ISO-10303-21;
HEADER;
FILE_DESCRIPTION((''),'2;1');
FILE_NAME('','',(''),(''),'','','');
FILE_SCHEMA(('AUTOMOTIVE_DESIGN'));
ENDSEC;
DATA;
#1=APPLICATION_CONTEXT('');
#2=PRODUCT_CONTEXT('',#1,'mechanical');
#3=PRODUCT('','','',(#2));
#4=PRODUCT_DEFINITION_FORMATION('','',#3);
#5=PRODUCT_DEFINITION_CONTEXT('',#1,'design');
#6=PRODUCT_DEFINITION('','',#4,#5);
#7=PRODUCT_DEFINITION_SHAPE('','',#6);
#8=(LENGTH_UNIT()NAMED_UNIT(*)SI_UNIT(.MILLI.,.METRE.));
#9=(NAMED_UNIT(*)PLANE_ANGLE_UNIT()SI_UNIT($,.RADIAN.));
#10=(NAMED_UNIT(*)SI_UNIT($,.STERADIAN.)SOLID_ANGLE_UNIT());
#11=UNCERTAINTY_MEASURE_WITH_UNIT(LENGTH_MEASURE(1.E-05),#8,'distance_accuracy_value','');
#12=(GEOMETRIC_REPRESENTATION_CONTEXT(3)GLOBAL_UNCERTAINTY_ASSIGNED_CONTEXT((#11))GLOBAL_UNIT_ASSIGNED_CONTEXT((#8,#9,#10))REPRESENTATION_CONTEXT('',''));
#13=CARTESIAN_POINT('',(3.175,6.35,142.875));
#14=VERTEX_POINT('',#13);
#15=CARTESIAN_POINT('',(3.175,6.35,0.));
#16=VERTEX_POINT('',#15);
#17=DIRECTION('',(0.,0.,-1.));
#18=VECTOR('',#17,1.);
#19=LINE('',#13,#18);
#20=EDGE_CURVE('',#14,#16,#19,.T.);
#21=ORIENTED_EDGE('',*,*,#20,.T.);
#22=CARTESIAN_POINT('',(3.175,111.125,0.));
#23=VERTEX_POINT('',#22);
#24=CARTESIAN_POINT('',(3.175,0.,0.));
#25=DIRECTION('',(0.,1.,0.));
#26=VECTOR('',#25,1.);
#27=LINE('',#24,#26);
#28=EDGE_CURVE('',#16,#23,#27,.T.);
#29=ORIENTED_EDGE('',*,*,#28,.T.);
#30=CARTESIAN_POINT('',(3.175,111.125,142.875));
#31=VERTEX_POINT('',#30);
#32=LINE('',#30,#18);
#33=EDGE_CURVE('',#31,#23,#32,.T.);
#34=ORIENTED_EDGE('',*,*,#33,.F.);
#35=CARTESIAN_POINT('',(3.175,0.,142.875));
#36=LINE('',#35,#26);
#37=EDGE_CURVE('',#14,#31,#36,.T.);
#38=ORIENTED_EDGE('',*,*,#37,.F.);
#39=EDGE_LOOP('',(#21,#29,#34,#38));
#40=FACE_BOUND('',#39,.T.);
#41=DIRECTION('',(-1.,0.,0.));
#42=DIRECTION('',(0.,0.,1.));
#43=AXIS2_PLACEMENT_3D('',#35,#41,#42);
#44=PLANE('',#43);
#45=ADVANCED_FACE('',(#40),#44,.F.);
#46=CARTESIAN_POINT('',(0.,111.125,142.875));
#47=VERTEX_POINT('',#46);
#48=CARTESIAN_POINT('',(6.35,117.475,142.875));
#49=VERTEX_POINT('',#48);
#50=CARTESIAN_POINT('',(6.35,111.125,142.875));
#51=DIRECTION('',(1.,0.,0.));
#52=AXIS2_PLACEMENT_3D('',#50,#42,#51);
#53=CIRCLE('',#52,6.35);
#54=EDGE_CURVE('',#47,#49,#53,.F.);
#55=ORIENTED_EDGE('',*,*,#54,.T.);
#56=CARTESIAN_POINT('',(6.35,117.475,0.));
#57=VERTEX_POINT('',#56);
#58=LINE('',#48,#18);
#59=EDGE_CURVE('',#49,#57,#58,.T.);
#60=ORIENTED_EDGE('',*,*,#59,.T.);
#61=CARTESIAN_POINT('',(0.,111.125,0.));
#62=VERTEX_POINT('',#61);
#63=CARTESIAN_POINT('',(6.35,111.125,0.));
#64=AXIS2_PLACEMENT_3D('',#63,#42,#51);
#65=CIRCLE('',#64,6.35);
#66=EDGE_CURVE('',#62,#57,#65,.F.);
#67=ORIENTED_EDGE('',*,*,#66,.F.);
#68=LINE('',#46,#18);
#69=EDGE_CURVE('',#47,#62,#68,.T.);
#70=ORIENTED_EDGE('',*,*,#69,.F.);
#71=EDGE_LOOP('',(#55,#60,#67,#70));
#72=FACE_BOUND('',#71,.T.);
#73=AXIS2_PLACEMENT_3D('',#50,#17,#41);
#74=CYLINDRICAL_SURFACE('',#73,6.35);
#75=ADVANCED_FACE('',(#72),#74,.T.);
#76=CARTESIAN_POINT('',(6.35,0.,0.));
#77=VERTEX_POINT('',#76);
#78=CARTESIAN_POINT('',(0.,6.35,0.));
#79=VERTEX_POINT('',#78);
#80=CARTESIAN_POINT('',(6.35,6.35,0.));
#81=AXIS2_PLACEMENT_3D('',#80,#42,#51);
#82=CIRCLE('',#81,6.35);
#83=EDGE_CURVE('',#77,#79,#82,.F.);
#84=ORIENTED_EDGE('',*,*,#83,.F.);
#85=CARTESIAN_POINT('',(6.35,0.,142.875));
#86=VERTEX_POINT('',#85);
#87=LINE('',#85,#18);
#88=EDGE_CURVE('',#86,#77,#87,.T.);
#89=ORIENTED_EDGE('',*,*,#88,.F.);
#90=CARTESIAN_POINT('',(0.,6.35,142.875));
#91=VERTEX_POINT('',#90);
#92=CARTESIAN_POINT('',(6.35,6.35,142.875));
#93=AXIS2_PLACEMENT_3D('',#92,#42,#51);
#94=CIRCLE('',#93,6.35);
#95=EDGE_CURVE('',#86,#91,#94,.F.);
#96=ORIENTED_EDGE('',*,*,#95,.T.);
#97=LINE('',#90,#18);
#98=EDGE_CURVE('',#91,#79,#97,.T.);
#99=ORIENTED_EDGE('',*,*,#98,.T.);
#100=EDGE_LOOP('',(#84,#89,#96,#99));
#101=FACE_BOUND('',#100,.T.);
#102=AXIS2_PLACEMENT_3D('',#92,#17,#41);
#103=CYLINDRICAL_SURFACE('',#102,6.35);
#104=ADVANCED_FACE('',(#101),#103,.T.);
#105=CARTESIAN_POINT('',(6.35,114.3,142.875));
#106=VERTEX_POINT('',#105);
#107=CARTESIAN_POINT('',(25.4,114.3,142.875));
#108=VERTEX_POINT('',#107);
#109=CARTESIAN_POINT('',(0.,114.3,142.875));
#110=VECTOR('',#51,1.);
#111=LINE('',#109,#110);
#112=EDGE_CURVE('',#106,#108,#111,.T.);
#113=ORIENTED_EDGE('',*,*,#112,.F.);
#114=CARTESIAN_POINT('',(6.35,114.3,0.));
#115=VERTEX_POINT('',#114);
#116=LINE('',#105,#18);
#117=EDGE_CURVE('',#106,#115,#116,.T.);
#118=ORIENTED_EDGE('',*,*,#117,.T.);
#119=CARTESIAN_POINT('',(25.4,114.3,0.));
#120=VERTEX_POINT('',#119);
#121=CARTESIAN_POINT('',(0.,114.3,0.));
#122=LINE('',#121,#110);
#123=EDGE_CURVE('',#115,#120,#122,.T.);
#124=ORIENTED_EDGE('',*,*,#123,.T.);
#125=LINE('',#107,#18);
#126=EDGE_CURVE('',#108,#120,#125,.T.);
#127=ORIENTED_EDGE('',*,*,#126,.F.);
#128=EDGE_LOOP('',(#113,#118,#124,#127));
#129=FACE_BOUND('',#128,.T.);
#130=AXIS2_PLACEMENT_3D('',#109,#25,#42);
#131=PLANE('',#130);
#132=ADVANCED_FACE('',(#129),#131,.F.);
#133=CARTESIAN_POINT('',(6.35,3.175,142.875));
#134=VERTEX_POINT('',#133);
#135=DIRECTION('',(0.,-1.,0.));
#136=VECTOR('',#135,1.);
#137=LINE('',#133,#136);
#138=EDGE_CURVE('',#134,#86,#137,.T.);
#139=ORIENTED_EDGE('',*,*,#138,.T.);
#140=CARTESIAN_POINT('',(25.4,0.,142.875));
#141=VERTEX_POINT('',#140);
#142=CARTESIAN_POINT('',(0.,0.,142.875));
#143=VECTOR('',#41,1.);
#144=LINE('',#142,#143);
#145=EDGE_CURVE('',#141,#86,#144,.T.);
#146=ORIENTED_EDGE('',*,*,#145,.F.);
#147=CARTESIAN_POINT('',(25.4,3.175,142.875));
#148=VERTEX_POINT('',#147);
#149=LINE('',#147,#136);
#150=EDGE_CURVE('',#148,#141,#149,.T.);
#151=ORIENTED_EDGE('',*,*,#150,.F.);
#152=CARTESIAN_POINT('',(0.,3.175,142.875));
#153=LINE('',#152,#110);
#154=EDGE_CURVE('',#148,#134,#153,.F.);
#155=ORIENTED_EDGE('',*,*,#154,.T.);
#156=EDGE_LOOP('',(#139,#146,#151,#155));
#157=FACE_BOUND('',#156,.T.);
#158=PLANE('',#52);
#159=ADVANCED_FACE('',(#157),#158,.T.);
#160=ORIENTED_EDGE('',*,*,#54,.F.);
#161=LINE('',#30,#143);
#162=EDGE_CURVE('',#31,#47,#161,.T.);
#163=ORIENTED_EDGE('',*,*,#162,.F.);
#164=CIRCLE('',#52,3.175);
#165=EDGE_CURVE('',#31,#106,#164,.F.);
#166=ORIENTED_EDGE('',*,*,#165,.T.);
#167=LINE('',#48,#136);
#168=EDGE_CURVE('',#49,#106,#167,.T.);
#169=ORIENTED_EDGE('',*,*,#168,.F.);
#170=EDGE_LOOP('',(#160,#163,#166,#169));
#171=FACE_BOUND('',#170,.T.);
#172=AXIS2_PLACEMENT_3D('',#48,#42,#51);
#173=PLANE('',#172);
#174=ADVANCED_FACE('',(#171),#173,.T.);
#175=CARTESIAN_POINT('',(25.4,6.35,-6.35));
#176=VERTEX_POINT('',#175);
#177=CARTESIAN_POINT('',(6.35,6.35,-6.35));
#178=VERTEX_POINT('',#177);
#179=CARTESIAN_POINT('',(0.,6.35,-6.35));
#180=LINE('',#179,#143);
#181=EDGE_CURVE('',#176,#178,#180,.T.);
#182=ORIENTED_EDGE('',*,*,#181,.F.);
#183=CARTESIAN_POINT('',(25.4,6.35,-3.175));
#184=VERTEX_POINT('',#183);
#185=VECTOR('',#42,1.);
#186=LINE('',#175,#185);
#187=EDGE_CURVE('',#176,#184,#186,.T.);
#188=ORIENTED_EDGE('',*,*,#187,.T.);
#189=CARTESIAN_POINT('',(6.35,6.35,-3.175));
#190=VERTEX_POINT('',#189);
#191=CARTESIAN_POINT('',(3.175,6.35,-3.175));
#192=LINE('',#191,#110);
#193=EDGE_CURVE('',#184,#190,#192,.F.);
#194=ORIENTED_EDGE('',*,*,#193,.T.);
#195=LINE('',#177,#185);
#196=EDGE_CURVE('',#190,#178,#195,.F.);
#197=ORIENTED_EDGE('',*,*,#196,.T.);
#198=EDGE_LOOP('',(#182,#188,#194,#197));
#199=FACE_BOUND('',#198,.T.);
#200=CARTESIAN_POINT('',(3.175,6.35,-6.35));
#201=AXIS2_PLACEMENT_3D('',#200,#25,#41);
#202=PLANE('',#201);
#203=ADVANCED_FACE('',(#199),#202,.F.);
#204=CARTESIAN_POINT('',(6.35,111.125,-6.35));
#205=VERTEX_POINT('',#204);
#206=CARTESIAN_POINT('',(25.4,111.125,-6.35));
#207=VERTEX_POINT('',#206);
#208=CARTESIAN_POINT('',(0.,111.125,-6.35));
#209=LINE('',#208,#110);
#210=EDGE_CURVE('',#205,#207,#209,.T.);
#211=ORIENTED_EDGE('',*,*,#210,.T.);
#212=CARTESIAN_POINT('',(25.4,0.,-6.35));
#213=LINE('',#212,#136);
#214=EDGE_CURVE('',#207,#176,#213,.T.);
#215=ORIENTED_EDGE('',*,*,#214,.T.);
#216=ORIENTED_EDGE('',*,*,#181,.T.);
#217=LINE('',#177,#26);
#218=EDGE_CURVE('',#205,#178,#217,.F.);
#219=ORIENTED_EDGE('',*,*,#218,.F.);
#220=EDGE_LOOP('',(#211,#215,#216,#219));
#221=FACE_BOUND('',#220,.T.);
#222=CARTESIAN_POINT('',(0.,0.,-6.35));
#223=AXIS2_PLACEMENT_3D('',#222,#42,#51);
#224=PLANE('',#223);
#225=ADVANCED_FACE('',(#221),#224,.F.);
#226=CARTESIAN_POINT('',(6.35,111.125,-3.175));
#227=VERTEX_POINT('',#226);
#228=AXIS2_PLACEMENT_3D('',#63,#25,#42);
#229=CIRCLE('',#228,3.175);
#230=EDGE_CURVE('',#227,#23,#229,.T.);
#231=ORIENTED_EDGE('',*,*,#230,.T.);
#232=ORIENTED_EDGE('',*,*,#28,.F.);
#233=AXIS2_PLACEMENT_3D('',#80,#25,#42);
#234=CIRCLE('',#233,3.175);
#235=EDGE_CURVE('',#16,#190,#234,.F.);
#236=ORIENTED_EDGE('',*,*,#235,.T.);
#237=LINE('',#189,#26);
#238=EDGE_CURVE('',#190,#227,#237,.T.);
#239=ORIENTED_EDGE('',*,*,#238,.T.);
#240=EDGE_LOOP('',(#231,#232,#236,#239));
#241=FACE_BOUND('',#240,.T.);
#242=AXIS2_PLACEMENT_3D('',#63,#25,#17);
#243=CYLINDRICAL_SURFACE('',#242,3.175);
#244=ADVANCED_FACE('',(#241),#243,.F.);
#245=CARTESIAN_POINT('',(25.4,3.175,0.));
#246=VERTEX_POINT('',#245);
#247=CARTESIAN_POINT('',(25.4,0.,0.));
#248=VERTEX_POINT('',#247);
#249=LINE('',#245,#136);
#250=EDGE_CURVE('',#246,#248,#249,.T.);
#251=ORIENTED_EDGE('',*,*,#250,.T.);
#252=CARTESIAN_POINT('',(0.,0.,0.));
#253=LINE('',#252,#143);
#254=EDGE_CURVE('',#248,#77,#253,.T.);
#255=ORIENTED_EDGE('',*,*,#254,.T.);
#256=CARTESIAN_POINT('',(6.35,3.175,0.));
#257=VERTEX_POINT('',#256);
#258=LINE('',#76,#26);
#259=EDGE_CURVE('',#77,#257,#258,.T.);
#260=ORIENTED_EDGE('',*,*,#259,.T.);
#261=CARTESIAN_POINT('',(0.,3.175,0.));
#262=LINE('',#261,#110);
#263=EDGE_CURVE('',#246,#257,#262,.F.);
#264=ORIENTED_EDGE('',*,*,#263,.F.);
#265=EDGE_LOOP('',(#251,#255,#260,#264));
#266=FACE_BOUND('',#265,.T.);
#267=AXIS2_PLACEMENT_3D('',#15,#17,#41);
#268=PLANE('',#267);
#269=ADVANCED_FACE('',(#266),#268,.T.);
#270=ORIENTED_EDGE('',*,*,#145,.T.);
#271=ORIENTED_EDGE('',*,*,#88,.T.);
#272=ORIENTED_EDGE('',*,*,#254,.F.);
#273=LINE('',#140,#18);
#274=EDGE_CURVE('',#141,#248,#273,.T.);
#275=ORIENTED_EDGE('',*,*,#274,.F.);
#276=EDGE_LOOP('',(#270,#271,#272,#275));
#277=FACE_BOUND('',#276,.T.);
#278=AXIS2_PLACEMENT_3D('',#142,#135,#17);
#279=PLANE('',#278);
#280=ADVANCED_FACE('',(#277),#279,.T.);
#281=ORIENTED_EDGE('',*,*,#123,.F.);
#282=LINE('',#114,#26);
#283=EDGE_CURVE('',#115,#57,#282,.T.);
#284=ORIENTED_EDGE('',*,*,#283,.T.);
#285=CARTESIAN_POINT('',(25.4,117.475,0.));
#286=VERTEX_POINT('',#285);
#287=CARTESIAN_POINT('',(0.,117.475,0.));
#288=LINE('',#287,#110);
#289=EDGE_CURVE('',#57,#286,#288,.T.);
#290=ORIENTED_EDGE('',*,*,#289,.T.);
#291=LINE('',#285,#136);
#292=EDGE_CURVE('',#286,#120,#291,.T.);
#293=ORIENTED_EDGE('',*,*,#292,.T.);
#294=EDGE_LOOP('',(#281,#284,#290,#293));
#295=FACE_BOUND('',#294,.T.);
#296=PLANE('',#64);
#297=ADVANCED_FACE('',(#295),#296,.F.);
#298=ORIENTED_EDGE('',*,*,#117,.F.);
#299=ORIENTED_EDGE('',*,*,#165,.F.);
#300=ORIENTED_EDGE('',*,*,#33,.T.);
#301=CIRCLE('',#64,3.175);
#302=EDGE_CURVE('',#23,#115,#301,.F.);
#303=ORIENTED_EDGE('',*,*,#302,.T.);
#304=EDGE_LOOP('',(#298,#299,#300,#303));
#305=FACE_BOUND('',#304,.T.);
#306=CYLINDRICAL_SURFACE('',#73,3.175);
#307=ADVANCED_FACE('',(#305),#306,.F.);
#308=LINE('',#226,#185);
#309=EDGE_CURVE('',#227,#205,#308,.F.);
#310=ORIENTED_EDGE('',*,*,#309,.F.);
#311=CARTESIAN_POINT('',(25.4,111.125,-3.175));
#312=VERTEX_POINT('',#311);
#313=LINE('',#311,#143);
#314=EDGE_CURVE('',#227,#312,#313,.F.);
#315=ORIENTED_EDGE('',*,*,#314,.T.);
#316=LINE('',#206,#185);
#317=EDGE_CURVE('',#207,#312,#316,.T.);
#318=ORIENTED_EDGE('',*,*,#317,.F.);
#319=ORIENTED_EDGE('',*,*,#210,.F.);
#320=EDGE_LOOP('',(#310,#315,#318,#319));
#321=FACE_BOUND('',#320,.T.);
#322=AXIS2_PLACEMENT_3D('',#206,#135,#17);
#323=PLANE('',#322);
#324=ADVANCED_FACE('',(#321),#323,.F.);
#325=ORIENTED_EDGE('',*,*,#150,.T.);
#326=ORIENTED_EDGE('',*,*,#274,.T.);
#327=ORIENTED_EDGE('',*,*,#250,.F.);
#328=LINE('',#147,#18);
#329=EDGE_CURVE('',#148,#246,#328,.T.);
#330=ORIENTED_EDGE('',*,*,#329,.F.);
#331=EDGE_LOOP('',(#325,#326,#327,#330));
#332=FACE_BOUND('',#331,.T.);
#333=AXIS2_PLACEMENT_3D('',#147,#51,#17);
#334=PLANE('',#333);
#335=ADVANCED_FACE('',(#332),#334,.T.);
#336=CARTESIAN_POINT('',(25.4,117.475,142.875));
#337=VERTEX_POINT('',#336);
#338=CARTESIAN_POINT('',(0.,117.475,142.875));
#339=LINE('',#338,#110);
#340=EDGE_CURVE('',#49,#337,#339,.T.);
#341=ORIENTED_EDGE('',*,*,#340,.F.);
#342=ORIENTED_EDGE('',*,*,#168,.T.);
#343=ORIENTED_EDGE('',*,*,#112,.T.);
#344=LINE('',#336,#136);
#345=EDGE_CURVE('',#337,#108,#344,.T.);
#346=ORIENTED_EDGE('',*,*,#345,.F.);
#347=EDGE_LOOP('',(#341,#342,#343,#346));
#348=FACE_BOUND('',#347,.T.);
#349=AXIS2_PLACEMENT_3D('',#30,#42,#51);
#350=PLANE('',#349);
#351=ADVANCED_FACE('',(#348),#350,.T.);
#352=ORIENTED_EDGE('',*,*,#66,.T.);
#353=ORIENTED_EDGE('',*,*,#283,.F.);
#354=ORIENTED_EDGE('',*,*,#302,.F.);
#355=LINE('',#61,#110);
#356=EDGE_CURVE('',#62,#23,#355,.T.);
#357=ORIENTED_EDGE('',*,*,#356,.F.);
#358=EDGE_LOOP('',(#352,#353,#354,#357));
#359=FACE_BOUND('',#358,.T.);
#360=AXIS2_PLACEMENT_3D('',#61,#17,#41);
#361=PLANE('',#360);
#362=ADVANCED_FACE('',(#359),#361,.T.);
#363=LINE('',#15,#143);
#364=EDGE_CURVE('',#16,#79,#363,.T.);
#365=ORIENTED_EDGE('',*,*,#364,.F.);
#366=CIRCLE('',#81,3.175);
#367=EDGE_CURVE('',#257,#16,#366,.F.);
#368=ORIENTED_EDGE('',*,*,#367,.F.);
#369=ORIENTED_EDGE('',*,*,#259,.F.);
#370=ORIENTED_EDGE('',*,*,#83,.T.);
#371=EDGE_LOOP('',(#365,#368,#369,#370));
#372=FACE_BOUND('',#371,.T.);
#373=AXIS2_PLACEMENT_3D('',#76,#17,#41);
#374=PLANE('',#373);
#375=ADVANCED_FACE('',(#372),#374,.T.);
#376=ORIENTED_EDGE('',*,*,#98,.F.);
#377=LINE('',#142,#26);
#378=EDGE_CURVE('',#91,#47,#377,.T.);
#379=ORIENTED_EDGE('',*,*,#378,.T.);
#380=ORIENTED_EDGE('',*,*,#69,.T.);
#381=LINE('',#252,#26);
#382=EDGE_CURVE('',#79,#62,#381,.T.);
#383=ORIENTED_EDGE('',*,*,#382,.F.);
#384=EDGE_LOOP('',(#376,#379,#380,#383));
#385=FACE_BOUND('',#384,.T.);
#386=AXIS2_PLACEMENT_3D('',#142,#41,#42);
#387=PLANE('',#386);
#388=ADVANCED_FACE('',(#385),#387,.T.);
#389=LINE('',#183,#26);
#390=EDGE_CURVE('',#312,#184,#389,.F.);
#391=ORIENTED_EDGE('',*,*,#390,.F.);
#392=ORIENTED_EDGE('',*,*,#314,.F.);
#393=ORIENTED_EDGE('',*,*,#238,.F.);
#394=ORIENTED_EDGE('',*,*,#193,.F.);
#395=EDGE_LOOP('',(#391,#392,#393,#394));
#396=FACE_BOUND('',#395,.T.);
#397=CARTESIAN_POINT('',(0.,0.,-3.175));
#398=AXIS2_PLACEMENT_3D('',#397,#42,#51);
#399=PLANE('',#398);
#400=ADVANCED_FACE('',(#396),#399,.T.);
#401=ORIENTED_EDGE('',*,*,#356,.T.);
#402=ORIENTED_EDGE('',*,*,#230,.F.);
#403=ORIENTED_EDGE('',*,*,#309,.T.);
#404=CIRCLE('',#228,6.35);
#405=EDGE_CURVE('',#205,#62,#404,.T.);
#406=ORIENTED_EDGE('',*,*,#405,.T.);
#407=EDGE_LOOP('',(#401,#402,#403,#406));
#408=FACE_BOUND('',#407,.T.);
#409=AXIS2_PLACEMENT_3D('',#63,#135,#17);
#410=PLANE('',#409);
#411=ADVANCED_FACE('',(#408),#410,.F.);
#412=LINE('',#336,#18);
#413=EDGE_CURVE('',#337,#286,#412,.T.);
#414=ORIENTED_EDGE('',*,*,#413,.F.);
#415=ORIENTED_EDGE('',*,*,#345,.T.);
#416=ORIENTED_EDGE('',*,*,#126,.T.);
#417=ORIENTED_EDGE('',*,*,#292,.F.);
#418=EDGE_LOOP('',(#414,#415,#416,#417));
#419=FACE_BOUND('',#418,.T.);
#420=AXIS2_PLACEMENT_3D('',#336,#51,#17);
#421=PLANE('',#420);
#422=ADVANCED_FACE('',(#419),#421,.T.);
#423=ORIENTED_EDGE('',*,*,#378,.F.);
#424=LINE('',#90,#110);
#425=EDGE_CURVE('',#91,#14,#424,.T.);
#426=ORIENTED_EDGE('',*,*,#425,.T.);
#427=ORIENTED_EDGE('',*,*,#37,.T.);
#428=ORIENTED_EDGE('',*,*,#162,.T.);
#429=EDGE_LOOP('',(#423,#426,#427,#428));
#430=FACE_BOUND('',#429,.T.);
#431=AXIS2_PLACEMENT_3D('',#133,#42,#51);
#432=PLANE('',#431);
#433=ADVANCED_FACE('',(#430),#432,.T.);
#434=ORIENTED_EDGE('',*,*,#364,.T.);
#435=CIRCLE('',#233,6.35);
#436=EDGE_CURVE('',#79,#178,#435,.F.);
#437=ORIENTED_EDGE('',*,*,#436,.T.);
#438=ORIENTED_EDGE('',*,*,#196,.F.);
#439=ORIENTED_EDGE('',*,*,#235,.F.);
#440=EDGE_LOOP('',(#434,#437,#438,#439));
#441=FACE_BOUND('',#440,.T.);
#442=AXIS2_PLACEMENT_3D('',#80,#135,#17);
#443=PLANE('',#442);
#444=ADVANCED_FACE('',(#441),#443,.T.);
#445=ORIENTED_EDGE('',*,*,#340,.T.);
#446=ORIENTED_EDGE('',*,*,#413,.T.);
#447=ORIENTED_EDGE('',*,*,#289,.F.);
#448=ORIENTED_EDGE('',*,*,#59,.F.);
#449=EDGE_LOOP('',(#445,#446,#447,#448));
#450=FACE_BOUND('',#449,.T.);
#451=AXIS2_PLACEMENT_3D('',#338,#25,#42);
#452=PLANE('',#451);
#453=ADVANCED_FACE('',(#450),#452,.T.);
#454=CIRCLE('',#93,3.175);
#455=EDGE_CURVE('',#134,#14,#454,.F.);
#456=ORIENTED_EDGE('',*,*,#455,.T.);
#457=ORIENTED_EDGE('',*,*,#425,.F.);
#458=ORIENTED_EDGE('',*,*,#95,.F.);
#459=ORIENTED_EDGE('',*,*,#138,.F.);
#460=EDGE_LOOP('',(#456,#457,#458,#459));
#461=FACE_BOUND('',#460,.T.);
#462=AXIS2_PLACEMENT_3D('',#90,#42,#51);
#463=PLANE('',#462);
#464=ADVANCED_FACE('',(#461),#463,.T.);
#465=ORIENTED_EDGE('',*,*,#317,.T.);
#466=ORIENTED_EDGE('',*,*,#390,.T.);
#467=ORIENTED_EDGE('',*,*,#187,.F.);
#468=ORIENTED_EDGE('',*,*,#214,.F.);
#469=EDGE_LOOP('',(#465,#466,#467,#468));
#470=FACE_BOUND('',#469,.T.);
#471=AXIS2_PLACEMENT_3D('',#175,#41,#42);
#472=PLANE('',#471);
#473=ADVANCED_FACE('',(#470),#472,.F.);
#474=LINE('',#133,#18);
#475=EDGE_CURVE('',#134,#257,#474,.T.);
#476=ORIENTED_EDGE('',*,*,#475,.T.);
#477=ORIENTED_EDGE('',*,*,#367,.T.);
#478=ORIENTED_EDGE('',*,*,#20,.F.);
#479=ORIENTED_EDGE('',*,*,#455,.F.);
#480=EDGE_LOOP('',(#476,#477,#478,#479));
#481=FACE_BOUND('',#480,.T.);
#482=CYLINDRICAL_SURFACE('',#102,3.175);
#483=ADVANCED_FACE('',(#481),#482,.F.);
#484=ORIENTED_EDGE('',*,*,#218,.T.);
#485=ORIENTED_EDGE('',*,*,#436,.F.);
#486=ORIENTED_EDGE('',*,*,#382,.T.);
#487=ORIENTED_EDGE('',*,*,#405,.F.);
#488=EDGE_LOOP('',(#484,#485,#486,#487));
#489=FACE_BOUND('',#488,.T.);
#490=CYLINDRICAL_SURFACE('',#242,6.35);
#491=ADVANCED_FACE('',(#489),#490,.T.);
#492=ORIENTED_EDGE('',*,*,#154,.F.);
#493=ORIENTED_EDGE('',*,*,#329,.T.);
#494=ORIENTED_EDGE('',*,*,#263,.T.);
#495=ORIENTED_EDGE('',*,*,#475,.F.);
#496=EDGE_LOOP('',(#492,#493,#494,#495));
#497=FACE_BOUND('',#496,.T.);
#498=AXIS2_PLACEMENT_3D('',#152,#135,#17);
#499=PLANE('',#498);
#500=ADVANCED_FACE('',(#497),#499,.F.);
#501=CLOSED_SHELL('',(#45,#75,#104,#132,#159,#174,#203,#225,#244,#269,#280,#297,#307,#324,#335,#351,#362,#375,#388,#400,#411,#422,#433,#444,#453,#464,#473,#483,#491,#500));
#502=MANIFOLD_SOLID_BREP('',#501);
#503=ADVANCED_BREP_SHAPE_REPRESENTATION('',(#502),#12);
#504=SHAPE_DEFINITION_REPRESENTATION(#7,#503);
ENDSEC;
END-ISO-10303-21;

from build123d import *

# Parameters (mm, degrees)
BASE_FLANGE1_DEPTH = 142.875
EDGE_FLANGE1_DEPTH = 104.775


# Sheet-metal steps are written as plain solids
with BuildPart() as part:
    # Sketch1 → Base-Flange1 (new body)
    with BuildSketch(Plane.XY):
        with BuildLine():
            Line((25.4, 117.475), (6.35, 117.475))
            ThreePointArc((6.35, 117.475), (1.859871939, 115.615128061), (0, 111.125))
            Line((0, 111.125), (0, 6.35))
            ThreePointArc((0, 6.35), (1.859871939, 1.859871939), (6.35, 0))
            Line((6.35, 0), (25.4, 0))
            Line((25.4, 0), (25.4, 3.175))
            Line((25.4, 3.175), (6.35, 3.175))
            ThreePointArc((6.35, 3.175), (4.10493597, 4.10493597), (3.175, 6.35))
            Line((3.175, 6.35), (3.175, 111.125))
            ThreePointArc((3.175, 111.125), (4.10493597, 113.37006403), (6.35, 114.3))
            Line((6.35, 114.3), (25.4, 114.3))
            Line((25.4, 114.3), (25.4, 117.475))
        make_face()
    extrude(amount=BASE_FLANGE1_DEPTH)

    # Edge-Flange1 section (across the edge) → Edge-Flange1 (add)
    with BuildSketch(Plane(origin=(3.175, 6.35, -3.175), x_dir=(0, 0, 1), z_dir=(0, 1, 0))):
        with BuildLine():
            Line((-3.175, 3.175), (-3.175, 22.225))
            Line((-3.175, 22.225), (0, 22.225))
            Line((0, 22.225), (0, 3.175))
            ThreePointArc((0, 3.175), (0.92993597, 0.92993597), (3.175, 0))
            Line((3.175, 0), (3.175, -3.175))
            ThreePointArc((3.175, -3.175), (-1.315128061, -1.315128061), (-3.175, 3.175))
        make_face()
    extrude(amount=EDGE_FLANGE1_DEPTH)


solid = part.part
